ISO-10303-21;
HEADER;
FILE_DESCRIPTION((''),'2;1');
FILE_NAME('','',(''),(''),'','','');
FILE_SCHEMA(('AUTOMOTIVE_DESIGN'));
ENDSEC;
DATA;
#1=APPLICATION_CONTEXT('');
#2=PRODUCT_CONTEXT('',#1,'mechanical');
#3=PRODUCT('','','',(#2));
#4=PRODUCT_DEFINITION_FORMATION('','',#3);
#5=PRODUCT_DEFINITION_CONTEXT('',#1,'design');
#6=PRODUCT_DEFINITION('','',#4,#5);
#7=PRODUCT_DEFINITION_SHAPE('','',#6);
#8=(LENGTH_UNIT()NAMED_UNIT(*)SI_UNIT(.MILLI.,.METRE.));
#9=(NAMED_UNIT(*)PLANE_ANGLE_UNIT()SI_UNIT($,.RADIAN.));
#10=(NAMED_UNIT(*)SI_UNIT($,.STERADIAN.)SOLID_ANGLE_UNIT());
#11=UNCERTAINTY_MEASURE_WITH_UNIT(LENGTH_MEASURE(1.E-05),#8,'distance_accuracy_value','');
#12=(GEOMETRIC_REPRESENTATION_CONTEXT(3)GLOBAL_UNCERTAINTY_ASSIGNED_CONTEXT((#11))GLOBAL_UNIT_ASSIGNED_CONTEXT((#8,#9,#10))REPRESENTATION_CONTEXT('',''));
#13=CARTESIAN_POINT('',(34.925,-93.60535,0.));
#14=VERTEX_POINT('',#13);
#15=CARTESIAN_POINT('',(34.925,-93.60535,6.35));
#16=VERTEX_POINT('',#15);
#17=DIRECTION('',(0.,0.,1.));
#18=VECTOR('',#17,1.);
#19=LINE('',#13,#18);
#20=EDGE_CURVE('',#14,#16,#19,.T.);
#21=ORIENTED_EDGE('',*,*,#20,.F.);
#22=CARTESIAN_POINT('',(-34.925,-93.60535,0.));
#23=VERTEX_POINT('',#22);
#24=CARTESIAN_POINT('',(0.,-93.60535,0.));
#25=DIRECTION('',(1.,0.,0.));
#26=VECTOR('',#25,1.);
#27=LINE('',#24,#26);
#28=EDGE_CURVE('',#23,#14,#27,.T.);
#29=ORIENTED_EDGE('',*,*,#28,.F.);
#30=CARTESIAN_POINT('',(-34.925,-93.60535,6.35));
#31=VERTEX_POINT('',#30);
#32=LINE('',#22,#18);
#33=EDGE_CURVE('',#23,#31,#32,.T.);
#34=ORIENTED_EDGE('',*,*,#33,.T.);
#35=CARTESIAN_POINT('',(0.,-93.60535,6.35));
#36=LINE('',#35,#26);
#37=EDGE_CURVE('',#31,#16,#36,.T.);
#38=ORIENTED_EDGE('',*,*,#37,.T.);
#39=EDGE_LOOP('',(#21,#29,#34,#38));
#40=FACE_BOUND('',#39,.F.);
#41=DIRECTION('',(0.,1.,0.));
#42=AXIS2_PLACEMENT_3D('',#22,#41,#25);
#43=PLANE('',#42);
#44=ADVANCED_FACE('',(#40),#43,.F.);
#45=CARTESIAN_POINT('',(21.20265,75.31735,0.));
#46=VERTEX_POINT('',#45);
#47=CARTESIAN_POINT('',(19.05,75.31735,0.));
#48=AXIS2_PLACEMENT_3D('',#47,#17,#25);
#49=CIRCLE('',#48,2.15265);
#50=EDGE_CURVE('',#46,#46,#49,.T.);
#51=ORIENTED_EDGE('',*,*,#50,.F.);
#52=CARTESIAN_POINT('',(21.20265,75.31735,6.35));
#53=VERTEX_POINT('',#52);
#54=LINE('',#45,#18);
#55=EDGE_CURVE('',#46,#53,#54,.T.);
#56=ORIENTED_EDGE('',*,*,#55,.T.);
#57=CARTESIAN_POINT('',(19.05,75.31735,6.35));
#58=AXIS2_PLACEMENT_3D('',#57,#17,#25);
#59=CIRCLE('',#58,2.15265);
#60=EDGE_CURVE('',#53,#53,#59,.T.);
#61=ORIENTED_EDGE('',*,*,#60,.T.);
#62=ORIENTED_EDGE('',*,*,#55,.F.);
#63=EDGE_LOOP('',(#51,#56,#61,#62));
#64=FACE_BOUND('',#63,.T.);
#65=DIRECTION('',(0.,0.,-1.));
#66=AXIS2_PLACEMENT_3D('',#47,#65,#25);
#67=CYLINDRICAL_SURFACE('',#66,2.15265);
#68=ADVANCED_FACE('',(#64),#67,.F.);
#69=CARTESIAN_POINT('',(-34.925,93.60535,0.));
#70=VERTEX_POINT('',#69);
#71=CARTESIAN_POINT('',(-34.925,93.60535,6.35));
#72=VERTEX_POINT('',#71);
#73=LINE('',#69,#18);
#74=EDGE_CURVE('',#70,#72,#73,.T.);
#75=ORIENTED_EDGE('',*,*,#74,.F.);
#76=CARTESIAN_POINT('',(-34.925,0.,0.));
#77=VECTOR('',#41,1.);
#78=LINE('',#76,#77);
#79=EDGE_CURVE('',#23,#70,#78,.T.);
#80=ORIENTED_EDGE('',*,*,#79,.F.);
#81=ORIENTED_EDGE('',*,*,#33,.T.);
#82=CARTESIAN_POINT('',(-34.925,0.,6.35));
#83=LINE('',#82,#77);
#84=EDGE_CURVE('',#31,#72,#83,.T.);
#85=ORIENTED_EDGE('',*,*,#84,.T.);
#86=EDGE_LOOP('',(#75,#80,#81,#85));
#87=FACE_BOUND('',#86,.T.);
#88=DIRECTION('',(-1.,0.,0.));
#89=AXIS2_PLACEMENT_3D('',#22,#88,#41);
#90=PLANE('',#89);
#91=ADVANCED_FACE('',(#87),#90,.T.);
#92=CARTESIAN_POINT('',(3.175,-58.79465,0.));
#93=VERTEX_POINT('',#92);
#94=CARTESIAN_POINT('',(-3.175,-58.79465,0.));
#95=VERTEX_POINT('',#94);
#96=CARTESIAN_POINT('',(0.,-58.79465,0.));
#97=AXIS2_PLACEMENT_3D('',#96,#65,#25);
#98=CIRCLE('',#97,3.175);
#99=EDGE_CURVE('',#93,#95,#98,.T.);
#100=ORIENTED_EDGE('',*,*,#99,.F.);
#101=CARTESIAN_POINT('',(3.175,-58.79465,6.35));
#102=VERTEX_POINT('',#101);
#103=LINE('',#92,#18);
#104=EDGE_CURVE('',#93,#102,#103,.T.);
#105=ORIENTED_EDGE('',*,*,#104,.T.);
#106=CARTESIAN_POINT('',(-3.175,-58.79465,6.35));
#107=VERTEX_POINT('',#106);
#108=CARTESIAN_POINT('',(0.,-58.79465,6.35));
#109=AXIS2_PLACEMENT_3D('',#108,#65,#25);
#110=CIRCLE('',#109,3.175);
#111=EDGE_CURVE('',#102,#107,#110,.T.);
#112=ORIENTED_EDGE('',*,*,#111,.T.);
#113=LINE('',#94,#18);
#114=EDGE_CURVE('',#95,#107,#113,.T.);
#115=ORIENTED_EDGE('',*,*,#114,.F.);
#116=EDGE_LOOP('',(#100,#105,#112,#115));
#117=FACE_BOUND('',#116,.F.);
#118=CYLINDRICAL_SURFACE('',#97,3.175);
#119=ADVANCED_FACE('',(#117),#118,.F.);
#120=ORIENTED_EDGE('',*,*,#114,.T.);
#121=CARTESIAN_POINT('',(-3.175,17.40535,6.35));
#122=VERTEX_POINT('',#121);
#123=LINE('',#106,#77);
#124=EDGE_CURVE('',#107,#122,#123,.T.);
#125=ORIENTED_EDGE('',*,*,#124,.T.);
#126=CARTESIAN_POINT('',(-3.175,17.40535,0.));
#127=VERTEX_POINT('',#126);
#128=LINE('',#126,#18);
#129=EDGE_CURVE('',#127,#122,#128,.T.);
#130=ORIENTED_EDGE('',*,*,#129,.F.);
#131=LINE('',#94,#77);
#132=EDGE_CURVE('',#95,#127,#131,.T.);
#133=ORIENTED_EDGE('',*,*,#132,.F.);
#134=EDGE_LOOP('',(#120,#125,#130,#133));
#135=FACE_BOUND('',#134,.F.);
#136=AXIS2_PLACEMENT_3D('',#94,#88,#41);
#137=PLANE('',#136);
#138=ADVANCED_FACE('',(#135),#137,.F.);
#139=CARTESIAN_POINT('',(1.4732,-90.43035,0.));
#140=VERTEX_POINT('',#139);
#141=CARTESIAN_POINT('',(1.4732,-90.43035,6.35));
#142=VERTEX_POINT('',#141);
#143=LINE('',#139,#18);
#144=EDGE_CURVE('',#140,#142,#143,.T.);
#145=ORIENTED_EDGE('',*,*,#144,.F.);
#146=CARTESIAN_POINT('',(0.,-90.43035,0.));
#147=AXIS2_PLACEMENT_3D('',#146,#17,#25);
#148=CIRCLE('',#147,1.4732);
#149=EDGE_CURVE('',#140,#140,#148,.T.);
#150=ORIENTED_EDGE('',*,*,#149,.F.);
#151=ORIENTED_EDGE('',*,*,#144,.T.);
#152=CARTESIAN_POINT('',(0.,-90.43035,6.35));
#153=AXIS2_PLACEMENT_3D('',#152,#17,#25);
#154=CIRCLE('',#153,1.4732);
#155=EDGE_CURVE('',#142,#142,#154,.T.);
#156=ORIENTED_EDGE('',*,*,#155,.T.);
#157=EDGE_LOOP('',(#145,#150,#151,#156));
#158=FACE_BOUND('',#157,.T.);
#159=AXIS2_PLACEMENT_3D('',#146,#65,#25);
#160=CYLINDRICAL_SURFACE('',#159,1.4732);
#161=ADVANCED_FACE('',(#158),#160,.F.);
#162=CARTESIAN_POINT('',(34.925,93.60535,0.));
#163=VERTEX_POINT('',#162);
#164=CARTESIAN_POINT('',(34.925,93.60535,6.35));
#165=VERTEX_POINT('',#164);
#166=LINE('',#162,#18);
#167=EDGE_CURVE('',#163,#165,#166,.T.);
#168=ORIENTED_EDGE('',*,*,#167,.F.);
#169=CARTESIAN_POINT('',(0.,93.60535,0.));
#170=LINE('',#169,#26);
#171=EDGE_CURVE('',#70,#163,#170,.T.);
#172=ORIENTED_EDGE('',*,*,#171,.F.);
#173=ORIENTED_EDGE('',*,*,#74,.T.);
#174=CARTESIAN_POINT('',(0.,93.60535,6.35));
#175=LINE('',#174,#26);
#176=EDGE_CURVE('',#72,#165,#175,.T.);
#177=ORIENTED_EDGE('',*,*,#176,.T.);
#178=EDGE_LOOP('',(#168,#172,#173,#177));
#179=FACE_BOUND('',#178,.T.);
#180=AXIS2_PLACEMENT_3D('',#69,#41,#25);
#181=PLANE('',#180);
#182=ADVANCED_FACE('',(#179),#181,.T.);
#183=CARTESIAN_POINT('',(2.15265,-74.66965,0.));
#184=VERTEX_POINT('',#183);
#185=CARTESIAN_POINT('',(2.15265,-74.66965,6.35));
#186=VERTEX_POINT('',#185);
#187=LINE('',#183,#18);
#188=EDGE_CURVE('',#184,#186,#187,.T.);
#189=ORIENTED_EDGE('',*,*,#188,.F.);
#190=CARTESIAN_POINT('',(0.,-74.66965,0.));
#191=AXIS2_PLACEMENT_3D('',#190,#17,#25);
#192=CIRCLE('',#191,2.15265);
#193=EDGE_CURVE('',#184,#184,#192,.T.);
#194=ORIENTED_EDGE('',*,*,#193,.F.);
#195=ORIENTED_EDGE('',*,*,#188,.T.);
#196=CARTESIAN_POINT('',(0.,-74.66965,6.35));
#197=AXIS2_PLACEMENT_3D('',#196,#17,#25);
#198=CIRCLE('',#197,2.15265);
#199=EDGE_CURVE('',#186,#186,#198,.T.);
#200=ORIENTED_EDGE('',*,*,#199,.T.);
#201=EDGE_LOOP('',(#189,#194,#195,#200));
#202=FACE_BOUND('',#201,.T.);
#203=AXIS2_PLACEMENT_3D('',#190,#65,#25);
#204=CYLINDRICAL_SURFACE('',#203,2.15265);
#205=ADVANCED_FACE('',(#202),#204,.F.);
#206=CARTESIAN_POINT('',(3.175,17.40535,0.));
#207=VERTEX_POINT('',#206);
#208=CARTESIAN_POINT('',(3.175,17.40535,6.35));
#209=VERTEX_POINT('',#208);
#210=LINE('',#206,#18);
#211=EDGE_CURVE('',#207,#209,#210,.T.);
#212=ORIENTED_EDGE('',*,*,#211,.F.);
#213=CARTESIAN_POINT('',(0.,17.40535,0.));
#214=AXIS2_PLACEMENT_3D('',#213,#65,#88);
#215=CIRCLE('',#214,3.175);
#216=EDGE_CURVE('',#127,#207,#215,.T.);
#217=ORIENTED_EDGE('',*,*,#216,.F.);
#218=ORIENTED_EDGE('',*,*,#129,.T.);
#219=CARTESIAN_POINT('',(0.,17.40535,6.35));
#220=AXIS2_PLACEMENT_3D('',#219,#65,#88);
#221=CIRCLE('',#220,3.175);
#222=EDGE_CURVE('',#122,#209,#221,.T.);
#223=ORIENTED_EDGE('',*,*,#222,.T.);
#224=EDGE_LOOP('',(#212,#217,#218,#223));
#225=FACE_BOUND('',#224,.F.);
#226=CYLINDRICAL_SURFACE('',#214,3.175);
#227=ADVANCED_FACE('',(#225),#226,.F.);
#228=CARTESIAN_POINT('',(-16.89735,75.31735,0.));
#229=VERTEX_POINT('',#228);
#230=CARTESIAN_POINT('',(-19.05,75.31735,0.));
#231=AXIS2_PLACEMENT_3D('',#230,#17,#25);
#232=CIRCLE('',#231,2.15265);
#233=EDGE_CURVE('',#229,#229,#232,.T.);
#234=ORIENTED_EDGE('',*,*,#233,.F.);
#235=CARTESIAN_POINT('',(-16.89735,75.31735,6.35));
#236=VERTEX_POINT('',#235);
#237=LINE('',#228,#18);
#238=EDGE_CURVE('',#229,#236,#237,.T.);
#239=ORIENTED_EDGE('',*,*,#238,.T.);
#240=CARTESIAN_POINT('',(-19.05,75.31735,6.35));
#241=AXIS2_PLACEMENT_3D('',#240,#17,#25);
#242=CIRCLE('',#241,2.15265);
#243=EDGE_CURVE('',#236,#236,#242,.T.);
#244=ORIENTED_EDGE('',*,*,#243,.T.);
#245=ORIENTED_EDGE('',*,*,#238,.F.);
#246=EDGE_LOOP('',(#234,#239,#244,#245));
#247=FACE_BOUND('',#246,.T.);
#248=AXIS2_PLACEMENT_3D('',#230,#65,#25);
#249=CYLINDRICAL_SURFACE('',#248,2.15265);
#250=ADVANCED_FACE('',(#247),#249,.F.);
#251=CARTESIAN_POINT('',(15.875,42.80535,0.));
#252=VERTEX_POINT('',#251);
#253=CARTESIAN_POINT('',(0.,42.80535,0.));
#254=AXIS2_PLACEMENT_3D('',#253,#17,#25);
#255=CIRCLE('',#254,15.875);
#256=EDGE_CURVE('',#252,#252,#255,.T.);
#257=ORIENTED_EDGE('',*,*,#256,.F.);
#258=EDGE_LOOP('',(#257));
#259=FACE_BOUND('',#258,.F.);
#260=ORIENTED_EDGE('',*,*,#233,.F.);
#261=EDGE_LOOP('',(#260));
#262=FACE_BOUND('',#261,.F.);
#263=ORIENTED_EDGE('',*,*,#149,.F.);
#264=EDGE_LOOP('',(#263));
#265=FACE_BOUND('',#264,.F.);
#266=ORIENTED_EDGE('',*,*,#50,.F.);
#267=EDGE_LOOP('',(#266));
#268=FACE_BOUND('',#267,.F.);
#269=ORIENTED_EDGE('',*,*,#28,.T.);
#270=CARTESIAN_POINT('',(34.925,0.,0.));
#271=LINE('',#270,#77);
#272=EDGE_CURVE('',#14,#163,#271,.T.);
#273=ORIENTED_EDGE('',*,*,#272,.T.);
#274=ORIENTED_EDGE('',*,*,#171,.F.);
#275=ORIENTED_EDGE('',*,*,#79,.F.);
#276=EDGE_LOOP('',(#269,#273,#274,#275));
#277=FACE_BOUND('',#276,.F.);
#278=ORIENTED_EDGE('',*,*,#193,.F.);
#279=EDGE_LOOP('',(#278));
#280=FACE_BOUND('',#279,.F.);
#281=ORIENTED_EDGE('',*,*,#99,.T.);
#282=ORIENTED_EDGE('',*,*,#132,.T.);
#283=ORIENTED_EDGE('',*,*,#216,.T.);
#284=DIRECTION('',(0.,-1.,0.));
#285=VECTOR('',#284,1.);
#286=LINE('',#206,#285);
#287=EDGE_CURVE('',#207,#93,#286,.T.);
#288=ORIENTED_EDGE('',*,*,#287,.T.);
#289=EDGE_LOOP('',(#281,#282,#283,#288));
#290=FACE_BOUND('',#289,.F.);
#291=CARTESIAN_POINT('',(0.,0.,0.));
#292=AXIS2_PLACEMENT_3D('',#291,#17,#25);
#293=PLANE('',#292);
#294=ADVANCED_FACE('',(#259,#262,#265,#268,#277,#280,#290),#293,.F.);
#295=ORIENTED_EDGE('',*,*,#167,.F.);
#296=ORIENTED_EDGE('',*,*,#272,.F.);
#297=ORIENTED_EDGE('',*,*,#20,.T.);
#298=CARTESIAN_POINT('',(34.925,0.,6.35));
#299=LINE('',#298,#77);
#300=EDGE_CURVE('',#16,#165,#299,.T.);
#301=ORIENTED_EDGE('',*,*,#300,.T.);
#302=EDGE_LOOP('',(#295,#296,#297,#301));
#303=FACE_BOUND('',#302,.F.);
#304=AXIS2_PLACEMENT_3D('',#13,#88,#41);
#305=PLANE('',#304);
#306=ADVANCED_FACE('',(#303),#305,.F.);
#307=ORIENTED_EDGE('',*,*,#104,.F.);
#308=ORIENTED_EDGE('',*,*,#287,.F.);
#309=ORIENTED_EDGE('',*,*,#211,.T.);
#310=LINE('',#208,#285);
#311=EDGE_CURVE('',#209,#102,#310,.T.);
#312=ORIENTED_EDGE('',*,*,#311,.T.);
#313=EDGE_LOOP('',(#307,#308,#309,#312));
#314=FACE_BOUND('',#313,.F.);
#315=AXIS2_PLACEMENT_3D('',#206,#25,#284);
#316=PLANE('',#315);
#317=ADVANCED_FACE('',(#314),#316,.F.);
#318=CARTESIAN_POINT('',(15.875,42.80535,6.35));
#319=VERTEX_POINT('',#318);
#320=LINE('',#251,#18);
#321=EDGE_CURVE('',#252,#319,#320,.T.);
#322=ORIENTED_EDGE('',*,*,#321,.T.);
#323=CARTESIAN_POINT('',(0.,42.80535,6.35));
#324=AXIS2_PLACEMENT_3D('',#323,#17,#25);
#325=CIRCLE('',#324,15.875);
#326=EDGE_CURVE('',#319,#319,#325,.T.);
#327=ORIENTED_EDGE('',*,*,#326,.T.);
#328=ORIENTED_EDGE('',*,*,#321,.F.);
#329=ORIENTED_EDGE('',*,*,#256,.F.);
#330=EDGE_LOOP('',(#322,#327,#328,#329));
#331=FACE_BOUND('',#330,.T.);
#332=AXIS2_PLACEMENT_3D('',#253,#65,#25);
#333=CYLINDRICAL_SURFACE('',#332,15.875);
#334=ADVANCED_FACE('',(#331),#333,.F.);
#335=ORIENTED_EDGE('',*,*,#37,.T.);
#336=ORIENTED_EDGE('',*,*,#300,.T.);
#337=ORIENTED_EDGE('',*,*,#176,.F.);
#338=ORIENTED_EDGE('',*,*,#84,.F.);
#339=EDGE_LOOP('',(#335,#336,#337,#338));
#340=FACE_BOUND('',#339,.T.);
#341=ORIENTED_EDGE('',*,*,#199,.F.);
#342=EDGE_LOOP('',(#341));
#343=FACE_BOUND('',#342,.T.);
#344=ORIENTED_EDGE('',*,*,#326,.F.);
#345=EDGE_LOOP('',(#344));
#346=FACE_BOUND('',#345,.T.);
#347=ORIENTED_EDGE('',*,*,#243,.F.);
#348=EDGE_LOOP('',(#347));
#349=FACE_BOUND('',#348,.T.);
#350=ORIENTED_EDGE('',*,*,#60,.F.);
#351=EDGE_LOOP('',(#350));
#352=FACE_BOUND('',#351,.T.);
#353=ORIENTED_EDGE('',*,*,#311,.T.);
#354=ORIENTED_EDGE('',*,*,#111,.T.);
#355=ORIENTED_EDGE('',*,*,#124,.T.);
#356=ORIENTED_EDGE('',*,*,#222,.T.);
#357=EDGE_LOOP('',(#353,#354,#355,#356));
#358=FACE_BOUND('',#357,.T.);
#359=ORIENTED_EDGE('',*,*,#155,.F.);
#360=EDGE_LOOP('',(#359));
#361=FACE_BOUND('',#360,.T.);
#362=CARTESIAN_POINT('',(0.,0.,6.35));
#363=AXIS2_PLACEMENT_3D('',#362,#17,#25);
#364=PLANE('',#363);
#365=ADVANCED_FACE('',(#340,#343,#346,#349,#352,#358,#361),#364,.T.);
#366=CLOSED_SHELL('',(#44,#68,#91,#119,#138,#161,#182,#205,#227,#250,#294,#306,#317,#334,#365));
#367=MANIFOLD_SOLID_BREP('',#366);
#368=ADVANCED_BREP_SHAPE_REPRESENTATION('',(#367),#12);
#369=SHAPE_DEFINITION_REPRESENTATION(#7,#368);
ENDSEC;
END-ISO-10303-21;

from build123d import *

# Parameters (mm, degrees)
F1_W     = 69.85
F1_H     = 187.2107
F1_R     = 1.4732
F1_R_2   = 2.15265
F1_R_3   = 15.875
F2_DEPTH = 6.35


# Not quite as in the source:
# - a variable given as a bare number and used for a length is read in inches; the dataset says mm whatever the document's units were


with BuildPart() as f2:
    # F1 (on Top) → F2 (new body)
    with BuildSketch(Plane.XY):
        Rectangle(F1_W, F1_H)
        with Locations((0, -90.43035)):
            Circle(F1_R, mode=Mode.SUBTRACT)
        with Locations((0, -74.66965)):
            Circle(F1_R_2, mode=Mode.SUBTRACT)
        with BuildLine():
            ThreePointArc((-3.175, 17.40535), (0, 20.58035), (3.175, 17.40535))
            Line((3.175, 17.40535), (3.175, -58.79465))
            ThreePointArc((3.175, -58.79465), (0, -61.96965), (-3.175, -58.79465))
            Line((-3.175, -58.79465), (-3.175, 17.40535))
        make_face(mode=Mode.SUBTRACT)
        with Locations((-19.05, 75.31735)):
            Circle(F1_R_2, mode=Mode.SUBTRACT)
        with Locations((0, 42.80535)):
            Circle(F1_R_3, mode=Mode.SUBTRACT)
        with Locations((19.05, 75.31735)):
            Circle(F1_R_2, mode=Mode.SUBTRACT)
    extrude(amount=F2_DEPTH)


solid = f2.part
